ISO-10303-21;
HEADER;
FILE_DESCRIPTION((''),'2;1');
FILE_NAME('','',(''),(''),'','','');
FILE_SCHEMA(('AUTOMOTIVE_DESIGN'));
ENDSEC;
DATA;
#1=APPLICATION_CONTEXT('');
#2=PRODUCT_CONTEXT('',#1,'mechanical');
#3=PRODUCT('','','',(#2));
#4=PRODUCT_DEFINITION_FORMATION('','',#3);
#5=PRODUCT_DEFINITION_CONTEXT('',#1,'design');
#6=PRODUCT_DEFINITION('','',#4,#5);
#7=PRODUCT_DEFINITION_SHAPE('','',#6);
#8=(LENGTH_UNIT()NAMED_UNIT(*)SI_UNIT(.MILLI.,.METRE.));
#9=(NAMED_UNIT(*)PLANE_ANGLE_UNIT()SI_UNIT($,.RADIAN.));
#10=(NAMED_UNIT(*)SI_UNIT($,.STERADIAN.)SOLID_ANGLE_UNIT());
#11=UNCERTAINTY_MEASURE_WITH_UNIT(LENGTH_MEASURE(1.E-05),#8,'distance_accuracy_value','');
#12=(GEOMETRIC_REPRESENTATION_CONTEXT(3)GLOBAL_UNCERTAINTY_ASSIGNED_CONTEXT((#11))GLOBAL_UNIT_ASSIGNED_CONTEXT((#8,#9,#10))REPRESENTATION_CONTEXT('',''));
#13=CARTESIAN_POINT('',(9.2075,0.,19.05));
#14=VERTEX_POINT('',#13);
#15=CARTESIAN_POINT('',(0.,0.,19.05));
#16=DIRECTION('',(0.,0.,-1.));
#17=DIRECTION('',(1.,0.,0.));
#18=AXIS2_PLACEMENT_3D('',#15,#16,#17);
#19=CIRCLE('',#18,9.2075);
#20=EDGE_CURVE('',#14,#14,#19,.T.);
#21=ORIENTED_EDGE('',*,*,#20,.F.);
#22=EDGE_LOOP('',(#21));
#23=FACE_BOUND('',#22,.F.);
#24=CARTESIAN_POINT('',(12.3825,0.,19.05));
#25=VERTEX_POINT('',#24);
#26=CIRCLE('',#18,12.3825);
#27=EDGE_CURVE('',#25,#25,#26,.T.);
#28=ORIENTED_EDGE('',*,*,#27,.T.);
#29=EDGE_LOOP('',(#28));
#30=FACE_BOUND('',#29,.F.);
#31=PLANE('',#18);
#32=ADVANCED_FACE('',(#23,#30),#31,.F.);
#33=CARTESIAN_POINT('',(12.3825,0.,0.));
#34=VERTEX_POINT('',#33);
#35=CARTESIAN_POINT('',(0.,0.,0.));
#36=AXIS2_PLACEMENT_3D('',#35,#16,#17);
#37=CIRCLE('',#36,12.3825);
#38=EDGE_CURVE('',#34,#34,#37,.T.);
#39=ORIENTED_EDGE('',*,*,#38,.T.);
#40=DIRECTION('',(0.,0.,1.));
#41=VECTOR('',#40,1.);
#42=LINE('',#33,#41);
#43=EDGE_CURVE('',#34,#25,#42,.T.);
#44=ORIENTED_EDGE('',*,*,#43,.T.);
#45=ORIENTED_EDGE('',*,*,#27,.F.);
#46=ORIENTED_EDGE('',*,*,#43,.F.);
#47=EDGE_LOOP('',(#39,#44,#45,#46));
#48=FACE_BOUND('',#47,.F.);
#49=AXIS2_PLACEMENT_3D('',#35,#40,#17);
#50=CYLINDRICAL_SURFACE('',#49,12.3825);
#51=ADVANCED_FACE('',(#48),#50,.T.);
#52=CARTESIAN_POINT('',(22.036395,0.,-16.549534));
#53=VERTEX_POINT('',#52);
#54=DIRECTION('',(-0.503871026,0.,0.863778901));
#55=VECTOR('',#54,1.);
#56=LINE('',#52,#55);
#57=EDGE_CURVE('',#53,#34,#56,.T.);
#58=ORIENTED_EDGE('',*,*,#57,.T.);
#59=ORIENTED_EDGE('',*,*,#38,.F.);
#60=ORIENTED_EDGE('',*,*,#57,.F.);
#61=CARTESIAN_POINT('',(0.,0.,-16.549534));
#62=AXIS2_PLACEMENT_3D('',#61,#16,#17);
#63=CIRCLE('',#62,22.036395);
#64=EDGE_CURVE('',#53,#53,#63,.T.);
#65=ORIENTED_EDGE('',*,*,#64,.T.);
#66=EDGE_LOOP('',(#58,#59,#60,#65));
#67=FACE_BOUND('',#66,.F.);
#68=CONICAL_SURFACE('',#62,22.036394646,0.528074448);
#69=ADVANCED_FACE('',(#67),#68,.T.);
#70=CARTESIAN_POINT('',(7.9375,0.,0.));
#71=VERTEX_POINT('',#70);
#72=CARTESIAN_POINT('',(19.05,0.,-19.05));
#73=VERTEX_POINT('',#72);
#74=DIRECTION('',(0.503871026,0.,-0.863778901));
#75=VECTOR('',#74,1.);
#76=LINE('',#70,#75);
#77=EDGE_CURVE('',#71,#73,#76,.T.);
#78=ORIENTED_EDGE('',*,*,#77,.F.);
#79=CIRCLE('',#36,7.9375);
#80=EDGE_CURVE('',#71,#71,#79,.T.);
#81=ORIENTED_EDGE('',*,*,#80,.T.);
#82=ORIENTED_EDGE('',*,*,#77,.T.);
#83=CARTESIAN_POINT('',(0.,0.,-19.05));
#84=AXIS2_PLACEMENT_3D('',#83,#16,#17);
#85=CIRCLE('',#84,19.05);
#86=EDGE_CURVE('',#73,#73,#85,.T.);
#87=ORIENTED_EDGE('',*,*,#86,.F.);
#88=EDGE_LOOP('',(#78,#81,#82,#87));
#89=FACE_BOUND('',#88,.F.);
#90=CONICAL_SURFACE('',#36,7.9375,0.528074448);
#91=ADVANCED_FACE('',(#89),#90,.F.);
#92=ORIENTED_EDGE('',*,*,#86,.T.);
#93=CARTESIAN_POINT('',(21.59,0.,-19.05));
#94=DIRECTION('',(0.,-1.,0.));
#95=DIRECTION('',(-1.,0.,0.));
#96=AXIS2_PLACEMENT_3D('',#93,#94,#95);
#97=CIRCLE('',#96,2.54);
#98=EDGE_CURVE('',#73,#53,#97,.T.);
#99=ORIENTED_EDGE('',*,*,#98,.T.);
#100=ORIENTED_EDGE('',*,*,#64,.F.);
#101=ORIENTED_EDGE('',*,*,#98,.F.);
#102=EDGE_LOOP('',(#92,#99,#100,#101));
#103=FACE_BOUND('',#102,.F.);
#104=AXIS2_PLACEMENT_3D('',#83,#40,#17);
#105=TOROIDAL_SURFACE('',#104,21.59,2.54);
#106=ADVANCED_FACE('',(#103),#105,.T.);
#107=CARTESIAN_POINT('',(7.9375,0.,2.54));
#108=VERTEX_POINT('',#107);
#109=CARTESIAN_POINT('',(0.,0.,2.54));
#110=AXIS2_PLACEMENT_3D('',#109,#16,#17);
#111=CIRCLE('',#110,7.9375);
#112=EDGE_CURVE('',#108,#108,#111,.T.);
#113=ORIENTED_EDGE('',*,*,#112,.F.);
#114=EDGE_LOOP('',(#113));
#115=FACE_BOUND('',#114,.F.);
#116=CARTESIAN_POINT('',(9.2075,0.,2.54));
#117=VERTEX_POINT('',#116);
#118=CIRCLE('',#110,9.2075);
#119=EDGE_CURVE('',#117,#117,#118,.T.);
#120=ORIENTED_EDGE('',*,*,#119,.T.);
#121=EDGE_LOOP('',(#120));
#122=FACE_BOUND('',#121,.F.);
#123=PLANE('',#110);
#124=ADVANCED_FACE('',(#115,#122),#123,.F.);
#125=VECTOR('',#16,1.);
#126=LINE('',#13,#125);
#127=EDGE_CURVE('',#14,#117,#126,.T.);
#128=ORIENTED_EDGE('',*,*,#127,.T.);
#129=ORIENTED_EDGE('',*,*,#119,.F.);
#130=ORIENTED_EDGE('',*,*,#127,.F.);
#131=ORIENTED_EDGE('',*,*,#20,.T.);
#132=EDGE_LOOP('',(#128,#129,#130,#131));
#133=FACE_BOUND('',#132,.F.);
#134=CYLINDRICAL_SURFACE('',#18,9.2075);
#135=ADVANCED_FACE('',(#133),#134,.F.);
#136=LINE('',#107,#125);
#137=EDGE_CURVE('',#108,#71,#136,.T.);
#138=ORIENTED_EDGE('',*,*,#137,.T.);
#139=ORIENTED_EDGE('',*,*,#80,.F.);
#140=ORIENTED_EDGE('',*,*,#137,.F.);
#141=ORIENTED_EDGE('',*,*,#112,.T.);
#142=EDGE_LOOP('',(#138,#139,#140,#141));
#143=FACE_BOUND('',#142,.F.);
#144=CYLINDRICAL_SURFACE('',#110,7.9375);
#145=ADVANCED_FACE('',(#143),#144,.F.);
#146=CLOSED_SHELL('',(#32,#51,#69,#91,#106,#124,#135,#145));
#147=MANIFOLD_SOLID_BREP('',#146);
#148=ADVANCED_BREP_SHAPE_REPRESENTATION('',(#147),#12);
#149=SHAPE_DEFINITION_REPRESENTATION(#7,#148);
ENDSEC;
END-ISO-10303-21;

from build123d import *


# Not quite as in the source:
# - a feature names something its author has since deleted; it is built from what else it names


with BuildPart() as f1:
    # F0 (on Front) → F1 (revolve)
    with BuildSketch(Plane.XZ):
        with BuildLine():
            Line((9.2075, 19.05), (9.2075, 2.54))
            Line((9.2075, 2.54), (7.9375, 2.54))
            Line((7.9375, 2.54), (7.9375, 0))
            Line((7.9375, 0), (19.05, -19.05))
            ThreePointArc((19.05, -19.05), (23.2206068806, -20.9974910015), (22.0363946464, -16.5495336796))
            Line((22.0363946464, -16.5495336796), (12.3825, 0))
            Line((12.3825, 0), (12.3825, 19.05))
            Line((12.3825, 19.05), (9.2075, 19.05))
        make_face()
    revolve(axis=Axis((0, 0, -5.8383159339), (0, 0, -1)))


solid = f1.part
